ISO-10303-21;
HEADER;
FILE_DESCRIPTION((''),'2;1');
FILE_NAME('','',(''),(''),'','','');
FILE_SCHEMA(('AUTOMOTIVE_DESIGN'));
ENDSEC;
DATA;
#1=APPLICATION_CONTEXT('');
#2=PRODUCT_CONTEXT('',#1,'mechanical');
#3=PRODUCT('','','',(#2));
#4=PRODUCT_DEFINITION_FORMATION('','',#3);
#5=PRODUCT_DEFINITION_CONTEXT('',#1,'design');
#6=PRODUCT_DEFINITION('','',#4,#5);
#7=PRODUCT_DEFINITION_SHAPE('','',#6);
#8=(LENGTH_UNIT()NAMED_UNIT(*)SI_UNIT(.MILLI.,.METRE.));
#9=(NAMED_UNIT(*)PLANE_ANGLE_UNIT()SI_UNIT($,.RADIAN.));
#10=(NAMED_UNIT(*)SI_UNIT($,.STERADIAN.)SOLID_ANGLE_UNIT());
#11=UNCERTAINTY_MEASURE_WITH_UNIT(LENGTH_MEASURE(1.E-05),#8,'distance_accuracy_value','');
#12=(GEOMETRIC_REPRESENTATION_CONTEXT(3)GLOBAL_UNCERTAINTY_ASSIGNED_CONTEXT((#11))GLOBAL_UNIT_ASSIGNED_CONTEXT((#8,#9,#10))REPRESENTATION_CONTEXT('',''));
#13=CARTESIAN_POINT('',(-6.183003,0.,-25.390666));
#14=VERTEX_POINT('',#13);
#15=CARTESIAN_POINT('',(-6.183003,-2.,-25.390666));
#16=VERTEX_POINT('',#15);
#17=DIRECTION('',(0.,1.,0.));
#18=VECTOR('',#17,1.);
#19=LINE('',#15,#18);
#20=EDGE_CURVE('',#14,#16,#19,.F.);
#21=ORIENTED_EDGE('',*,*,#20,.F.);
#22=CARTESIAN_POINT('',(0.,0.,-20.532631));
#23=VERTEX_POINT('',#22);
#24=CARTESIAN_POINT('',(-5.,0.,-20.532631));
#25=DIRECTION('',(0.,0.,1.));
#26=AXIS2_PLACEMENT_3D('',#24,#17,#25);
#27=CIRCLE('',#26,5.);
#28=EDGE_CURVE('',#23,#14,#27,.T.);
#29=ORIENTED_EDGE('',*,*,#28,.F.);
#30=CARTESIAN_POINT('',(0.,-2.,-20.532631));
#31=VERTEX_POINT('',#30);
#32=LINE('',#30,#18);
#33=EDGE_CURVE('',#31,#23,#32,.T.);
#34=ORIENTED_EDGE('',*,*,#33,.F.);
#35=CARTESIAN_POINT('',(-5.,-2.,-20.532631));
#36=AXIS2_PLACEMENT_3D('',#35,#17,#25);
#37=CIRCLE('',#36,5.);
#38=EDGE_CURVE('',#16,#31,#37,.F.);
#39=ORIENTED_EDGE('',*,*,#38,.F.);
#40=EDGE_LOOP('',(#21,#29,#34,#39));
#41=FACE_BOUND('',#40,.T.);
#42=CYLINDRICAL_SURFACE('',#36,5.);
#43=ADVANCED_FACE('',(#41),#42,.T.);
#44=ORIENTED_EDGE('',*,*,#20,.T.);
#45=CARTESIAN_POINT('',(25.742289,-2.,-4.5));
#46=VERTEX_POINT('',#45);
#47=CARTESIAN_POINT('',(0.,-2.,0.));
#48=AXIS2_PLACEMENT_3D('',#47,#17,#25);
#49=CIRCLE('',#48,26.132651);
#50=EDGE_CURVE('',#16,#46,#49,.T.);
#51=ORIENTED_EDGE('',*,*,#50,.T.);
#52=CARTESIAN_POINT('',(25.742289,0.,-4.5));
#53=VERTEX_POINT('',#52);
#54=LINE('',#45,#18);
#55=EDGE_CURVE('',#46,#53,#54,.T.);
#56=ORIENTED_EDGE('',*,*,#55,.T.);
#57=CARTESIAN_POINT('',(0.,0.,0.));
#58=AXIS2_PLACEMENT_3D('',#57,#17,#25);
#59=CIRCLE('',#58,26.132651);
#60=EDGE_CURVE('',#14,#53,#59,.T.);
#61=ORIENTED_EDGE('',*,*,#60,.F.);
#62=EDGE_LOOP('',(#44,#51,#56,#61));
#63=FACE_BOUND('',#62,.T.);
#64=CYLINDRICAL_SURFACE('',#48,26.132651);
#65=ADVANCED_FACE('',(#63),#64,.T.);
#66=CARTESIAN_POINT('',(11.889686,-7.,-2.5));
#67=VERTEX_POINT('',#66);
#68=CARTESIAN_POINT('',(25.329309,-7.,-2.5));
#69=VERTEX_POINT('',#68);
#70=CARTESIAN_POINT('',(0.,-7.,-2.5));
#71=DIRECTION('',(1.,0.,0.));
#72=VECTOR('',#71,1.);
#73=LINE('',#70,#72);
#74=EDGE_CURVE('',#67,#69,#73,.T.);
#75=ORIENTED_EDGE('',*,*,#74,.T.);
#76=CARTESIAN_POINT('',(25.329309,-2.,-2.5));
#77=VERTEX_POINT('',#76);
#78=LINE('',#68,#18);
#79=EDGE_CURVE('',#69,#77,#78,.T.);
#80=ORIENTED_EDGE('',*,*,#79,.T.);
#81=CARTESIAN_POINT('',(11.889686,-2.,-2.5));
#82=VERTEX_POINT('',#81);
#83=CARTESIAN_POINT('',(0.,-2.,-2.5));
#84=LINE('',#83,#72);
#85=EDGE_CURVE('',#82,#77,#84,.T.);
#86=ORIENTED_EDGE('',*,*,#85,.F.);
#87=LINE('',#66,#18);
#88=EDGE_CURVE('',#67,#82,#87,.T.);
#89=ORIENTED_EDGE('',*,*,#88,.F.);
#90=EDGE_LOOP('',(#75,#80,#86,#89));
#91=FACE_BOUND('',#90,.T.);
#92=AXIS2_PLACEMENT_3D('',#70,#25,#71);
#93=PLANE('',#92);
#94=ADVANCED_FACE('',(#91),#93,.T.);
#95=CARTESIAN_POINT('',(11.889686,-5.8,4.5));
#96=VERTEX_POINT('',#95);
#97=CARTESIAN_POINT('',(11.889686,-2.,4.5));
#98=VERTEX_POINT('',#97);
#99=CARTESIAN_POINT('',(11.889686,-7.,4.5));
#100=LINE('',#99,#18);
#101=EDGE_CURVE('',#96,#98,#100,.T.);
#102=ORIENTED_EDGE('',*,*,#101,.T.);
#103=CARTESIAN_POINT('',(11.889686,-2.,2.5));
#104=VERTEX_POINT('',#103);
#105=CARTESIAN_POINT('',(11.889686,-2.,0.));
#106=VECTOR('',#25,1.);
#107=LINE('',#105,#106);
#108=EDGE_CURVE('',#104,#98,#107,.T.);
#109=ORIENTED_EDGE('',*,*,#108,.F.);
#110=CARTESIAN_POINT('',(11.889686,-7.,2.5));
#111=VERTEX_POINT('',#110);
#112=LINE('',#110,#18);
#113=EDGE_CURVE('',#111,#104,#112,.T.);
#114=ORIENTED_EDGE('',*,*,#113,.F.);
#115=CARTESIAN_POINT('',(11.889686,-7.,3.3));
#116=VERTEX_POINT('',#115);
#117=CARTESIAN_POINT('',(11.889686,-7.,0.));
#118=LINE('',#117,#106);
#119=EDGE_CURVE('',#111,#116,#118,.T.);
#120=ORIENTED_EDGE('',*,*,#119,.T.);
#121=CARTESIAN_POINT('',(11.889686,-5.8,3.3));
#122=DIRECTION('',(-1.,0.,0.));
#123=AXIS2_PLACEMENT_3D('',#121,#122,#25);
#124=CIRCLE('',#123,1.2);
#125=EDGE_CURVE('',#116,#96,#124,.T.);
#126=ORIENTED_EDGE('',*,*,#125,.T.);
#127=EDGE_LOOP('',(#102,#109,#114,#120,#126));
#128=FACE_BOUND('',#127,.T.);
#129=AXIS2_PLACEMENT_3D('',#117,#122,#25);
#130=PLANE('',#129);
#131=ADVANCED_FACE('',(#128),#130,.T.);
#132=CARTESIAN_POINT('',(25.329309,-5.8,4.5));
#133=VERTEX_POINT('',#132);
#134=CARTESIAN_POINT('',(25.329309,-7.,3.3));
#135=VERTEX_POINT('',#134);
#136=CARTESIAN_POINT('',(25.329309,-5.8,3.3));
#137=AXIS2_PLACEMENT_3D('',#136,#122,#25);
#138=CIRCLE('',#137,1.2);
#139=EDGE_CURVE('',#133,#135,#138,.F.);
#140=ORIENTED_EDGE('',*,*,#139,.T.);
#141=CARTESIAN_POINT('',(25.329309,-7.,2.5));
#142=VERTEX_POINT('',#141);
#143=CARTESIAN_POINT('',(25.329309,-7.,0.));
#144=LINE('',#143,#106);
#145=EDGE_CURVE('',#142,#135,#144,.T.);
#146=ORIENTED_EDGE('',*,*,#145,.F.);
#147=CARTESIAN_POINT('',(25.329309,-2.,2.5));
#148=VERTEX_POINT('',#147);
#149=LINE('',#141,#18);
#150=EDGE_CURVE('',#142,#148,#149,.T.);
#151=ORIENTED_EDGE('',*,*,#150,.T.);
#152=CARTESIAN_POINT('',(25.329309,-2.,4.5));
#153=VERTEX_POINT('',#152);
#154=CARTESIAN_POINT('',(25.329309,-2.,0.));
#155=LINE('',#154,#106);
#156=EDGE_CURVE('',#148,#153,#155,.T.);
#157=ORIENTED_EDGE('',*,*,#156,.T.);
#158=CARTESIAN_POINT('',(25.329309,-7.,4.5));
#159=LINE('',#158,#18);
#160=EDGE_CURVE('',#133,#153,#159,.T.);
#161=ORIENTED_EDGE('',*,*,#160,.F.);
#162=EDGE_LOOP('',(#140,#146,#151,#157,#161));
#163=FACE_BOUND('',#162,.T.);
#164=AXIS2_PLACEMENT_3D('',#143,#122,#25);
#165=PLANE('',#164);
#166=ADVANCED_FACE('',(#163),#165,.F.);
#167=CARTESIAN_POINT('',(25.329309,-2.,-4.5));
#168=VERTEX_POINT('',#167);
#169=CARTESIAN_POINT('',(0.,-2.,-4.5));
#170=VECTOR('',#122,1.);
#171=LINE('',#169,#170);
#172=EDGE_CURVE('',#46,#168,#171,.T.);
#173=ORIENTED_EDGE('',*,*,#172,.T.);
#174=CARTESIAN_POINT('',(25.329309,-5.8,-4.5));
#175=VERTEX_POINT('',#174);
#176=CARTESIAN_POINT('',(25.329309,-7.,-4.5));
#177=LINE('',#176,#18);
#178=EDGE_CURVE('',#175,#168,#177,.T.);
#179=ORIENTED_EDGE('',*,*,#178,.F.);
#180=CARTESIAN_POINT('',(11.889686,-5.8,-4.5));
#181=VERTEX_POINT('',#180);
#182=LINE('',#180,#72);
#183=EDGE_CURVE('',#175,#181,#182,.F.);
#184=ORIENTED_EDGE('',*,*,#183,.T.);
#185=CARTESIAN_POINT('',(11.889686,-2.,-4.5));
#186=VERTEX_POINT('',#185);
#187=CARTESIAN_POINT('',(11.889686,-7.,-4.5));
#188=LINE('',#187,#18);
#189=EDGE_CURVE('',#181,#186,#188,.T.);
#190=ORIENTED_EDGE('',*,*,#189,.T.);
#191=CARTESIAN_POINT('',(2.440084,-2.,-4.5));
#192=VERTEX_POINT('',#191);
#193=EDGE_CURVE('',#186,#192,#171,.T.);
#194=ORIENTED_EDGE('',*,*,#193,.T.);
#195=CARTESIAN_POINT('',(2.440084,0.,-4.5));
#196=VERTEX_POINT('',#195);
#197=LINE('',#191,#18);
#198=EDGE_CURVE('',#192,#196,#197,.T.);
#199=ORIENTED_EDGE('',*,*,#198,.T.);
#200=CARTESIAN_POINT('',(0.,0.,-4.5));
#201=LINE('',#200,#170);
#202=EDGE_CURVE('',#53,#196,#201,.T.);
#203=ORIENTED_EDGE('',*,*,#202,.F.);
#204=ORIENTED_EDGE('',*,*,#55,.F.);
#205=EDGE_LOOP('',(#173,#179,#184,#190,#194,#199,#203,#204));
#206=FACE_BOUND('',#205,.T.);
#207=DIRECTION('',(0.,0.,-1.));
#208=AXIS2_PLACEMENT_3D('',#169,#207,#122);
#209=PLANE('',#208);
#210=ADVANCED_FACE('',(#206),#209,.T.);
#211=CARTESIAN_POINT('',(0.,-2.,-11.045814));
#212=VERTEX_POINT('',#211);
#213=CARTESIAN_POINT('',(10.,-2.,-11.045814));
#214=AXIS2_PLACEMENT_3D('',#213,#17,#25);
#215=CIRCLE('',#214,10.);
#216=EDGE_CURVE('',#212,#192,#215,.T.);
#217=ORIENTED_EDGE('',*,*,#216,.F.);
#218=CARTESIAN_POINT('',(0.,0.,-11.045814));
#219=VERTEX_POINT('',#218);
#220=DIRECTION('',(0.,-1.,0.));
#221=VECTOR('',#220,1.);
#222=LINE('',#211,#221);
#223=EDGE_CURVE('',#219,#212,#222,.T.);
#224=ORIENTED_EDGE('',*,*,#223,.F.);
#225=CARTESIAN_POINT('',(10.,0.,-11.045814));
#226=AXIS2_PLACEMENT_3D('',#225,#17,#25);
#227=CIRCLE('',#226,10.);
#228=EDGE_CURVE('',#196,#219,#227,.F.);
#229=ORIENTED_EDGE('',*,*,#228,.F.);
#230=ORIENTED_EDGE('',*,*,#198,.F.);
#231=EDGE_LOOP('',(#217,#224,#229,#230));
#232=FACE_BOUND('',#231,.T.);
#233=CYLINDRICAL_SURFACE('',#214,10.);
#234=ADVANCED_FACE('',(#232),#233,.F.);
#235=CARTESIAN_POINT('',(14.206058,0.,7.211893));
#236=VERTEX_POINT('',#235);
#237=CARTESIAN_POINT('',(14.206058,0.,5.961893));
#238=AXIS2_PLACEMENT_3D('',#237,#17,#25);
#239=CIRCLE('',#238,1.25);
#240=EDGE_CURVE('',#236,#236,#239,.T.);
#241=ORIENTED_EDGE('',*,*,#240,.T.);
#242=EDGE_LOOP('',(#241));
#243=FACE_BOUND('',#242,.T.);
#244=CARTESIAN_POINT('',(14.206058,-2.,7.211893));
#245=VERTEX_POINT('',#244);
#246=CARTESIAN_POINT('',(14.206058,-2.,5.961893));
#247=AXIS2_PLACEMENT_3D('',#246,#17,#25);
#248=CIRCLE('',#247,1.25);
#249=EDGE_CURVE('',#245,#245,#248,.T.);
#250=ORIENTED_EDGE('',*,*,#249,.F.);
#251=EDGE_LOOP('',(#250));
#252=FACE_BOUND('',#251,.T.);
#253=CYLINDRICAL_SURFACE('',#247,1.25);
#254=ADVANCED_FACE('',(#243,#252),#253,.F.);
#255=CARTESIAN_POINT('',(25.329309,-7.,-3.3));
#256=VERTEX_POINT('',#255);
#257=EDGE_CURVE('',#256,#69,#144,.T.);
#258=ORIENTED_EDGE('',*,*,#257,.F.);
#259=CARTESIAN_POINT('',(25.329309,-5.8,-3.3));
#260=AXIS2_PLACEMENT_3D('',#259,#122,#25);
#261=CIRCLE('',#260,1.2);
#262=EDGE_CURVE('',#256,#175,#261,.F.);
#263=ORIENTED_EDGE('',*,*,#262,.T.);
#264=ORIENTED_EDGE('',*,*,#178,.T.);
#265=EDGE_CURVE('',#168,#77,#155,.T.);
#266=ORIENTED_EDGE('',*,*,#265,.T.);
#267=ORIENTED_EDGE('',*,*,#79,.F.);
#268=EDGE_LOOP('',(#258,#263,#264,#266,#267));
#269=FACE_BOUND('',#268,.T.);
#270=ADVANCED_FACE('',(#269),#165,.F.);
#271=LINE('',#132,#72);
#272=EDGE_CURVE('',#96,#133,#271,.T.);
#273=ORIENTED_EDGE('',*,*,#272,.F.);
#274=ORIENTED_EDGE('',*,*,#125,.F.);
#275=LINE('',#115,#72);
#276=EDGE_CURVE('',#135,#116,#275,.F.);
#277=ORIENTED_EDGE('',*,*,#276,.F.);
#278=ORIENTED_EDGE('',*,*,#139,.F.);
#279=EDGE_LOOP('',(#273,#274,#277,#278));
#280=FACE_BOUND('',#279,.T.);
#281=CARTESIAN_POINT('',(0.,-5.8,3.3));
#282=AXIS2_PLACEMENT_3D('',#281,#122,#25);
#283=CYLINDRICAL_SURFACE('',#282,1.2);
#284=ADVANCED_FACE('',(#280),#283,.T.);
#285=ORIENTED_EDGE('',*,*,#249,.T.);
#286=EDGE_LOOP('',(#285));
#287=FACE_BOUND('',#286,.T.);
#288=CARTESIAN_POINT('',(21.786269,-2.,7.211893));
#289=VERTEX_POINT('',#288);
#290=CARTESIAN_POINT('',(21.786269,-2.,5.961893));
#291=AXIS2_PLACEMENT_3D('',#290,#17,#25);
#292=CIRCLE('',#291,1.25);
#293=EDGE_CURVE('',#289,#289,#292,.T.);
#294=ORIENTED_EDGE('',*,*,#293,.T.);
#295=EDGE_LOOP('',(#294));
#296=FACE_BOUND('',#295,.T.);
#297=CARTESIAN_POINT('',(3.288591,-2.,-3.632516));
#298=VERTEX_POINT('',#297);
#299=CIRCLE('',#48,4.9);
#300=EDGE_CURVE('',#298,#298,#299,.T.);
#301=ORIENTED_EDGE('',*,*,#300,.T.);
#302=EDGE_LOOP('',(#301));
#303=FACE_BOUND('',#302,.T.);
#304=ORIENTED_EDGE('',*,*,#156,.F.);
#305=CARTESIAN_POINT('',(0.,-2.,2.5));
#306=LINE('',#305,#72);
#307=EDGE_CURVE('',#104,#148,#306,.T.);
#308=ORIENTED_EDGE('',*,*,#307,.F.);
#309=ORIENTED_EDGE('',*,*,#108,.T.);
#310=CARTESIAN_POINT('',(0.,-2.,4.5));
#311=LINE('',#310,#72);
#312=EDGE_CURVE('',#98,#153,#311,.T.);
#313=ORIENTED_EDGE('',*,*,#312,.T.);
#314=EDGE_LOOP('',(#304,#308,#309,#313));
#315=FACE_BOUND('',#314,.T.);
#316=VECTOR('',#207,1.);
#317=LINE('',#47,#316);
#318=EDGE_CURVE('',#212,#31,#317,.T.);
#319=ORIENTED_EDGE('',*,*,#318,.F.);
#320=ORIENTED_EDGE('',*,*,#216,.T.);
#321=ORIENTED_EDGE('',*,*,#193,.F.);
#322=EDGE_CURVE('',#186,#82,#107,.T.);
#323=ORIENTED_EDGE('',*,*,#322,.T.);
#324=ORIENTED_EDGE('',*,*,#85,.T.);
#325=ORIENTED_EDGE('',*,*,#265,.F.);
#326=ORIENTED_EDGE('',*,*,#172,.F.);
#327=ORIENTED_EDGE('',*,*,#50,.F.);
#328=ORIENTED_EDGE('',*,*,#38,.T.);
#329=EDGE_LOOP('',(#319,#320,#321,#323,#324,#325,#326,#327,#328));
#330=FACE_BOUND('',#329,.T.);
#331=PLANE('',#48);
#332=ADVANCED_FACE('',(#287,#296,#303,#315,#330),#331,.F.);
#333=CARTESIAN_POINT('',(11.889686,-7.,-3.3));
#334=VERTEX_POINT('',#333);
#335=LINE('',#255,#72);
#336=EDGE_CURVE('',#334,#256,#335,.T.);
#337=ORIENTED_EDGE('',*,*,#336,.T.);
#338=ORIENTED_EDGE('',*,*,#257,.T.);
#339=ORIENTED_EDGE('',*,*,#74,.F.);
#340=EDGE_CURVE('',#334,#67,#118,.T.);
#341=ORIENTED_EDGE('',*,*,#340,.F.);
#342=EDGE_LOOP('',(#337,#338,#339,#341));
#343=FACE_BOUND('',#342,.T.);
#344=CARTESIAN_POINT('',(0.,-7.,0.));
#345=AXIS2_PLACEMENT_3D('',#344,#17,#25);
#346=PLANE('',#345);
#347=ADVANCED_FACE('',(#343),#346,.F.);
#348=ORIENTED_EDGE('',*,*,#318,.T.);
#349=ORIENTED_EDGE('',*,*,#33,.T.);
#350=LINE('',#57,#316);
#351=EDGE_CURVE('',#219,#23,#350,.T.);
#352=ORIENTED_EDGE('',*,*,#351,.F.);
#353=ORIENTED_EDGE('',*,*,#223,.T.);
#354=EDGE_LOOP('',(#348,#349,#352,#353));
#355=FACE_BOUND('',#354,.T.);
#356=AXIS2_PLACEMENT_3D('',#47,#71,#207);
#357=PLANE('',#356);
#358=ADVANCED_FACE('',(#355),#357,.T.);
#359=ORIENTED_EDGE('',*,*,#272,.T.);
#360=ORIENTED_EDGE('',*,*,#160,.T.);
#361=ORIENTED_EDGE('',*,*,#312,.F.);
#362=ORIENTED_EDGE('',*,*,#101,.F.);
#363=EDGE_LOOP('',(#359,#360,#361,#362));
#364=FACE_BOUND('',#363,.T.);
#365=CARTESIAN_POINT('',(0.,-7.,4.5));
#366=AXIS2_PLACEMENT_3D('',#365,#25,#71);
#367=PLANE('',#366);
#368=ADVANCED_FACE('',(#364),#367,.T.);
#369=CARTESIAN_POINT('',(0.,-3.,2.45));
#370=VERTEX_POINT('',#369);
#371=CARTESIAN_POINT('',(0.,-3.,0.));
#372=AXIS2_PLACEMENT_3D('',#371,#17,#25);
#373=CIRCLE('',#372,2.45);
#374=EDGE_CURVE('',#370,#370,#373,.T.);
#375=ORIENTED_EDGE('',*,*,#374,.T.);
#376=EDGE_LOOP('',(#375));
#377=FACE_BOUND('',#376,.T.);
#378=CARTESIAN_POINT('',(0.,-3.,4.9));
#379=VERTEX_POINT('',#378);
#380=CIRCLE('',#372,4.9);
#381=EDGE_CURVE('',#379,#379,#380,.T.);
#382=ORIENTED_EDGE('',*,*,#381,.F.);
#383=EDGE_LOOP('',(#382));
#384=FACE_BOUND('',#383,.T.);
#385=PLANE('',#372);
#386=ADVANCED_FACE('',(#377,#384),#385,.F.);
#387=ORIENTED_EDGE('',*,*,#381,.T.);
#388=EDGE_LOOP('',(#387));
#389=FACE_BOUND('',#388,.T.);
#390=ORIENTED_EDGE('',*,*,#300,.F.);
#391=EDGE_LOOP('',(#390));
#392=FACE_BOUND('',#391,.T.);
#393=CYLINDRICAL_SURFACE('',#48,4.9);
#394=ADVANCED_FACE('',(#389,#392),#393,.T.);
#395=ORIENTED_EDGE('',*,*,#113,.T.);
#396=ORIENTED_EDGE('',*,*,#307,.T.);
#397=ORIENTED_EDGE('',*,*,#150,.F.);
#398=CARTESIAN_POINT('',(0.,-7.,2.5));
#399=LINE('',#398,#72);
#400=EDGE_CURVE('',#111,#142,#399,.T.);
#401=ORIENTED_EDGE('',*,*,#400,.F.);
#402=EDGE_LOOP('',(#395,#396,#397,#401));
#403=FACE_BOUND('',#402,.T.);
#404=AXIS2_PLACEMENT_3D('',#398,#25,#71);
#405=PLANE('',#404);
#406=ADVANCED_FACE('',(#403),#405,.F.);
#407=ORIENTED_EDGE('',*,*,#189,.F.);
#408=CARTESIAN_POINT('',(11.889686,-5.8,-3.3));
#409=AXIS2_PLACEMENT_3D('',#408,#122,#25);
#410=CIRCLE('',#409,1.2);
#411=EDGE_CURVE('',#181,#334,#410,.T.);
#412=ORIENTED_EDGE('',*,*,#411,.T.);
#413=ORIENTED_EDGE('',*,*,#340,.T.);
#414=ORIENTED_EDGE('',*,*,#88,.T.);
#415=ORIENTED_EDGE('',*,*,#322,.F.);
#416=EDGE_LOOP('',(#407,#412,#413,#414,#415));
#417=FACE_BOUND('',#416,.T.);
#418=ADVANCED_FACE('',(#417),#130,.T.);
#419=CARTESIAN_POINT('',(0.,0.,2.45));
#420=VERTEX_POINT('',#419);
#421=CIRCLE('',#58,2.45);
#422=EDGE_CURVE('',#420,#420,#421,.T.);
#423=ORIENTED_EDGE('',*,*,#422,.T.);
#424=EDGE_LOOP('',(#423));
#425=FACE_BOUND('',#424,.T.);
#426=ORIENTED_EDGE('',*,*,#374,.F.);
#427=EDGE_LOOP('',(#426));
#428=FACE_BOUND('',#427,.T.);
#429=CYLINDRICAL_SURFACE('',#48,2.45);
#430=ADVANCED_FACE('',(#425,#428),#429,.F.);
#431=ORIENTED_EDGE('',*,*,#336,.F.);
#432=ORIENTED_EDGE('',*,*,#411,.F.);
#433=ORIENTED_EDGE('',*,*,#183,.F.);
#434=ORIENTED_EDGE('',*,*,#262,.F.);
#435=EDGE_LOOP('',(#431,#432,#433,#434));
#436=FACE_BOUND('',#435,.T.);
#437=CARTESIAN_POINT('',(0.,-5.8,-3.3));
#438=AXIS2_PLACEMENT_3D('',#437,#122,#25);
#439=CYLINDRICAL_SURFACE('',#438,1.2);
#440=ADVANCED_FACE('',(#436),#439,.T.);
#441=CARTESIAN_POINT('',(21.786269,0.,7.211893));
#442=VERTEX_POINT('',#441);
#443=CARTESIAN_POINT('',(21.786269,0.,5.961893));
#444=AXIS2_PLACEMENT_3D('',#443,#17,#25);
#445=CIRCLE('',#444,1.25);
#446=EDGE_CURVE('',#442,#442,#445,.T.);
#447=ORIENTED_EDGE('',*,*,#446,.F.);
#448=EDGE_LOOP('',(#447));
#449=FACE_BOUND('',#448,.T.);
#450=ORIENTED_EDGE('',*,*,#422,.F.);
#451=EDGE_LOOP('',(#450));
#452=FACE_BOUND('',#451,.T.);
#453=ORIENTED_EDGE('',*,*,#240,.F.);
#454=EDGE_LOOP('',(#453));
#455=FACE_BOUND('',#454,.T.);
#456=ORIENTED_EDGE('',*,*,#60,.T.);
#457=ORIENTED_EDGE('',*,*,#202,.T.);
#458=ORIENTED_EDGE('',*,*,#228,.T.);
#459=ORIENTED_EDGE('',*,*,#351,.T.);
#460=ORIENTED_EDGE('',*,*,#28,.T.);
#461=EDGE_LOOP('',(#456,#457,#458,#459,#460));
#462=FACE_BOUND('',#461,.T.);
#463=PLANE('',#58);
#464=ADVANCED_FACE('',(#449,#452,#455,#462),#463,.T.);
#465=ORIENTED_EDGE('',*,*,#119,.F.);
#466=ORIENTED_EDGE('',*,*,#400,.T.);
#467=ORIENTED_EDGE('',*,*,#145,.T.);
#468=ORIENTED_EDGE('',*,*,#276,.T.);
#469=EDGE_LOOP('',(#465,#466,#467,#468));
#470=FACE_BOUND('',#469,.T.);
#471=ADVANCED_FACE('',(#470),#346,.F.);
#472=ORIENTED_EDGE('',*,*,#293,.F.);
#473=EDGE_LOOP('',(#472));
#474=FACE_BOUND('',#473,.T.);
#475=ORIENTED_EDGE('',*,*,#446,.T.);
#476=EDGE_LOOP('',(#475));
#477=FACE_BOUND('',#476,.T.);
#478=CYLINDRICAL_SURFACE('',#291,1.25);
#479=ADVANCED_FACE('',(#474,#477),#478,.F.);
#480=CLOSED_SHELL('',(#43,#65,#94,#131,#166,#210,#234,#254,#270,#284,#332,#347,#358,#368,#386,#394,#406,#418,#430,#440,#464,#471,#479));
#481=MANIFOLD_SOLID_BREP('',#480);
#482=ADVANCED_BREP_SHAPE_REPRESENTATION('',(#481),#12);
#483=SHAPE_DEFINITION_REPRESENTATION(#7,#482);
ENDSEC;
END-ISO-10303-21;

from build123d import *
from build123d.topology import SkipClean

# Parameters (mm, degrees)
SKETCH1_R                 = 1.25
SKETCH1_R_2               = 2.45
BOSS_EXTRUDE1_DEPTH       = 2
BOSS_EXTRUDE2_START       = -3
BOSS_EXTRUDE2_OUTLINE_R   = 4.9
BOSS_EXTRUDE2_OUTLINE_R_2 = 2.45
BOSS_EXTRUDE2_DEPTH       = 1
SKETCH1_5_W               = 13.43962311
SKETCH1_5_H               = 2
BOSS_EXTRUDE3_DEPTH       = 7
FILLET1_R                 = 10
FILLET2_R                 = 5
FILLET3_R                 = 1.2
FILLET4_R                 = 1.2


# Read off the part's stored shape, not the designer's step: Boss-Extrude2
with BuildPart() as part:
    # Sketch1 → Boss-Extrude1 (new body)
    with BuildSketch(Plane(origin=(0, 0, 0), x_dir=(1, 0, 0), z_dir=(0, 1, 0))):
        with BuildLine():
            ThreePointArc((1.939071943, 4.5), (0.989949494, 4.79895822), (0, 4.9))
            Line((0, 4.9), (0, 26.132651094))
            ThreePointArc((0, 26.132651094), (-16.812473395, -20.006403764), (25.742289199, 4.5))
            Line((25.742289199, 4.5), (1.939071943, 4.5))
        make_face()
        with Locations(Location((14.206057781, -5.961892897, 0), (0, 0, 270))):
            Circle(SKETCH1_R, mode=Mode.SUBTRACT)
        with Locations(Location((21.786269316, -5.961892897, 0), (0, 0, 270))):
            Circle(SKETCH1_R, mode=Mode.SUBTRACT)
        with Locations(Location((0, 0, 0), (0, 0, 270))):
            Circle(SKETCH1_R_2, mode=Mode.SUBTRACT)
    extrude(amount=-BOSS_EXTRUDE1_DEPTH)

    # Boss-Extrude2 outline → Boss-Extrude2 (add)
    with SkipClean():  # the faces are left unmerged after this step: merging them gives an invalid solid
        with BuildSketch(Plane(origin=(0, 0, 0), x_dir=(1, 0, 0), z_dir=(0, 1, 0)).offset(BOSS_EXTRUDE2_START)):
            Circle(BOSS_EXTRUDE2_OUTLINE_R)
            Circle(BOSS_EXTRUDE2_OUTLINE_R_2, mode=Mode.SUBTRACT)
        extrude(amount=BOSS_EXTRUDE2_DEPTH)
    add(part.part.scale(1), mode=Mode.REPLACE)  # the faces are merged on a copy

    # Sketch1<5> → Boss-Extrude3 (add)
    with BuildSketch(Plane(origin=(0, 0, 0), x_dir=(1, 0, 0), z_dir=(0, 1, 0))):
        with Locations((18.609497145, 3.5)):
            Rectangle(SKETCH1_5_W, SKETCH1_5_H)
        with Locations((18.609497145, -3.5)):
            Rectangle(SKETCH1_5_W, SKETCH1_5_H)
    extrude(amount=-BOSS_EXTRUDE3_DEPTH)

    # Fillet1
    # the kernel refuses this fillet: 10 mm, written as the material it adds along each edge
    with BuildSketch(Plane(origin=(0, 0, -4.9), x_dir=(0, 0, -1), z_dir=(0, -1, 0))) as fillet1_piece_1:
        with BuildLine():
            CenterArc((6.145813687, 10), FILLET1_R, 222.155184251, 47.844815749)
            ThreePointArc((-1.26748409, 3.288590604), (-0.32783815, 1.762196362), (0, 0))
            Line((0, 0), (6.145813687, 0))
        make_face()
    extrude(amount=2)

    # Fillet2
    fillet2_edges = [part.edges().sort_by_distance(p)[0] for p in [
        (0, -1, -26.132651094),
    ]]
    fillet(fillet2_edges, radius=FILLET2_R)

    # Fillet3
    fillet3_edges = [part.edges().sort_by_distance(p)[0] for p in [
        (18.609497145, -7, 4.5),
    ]]
    fillet(fillet3_edges, radius=FILLET3_R)

    # Fillet4
    fillet4_edges = [part.edges().sort_by_distance(p)[0] for p in [
        (18.609497145, -7, -4.5),
    ]]
    fillet(fillet4_edges, radius=FILLET4_R)


solid = part.part
